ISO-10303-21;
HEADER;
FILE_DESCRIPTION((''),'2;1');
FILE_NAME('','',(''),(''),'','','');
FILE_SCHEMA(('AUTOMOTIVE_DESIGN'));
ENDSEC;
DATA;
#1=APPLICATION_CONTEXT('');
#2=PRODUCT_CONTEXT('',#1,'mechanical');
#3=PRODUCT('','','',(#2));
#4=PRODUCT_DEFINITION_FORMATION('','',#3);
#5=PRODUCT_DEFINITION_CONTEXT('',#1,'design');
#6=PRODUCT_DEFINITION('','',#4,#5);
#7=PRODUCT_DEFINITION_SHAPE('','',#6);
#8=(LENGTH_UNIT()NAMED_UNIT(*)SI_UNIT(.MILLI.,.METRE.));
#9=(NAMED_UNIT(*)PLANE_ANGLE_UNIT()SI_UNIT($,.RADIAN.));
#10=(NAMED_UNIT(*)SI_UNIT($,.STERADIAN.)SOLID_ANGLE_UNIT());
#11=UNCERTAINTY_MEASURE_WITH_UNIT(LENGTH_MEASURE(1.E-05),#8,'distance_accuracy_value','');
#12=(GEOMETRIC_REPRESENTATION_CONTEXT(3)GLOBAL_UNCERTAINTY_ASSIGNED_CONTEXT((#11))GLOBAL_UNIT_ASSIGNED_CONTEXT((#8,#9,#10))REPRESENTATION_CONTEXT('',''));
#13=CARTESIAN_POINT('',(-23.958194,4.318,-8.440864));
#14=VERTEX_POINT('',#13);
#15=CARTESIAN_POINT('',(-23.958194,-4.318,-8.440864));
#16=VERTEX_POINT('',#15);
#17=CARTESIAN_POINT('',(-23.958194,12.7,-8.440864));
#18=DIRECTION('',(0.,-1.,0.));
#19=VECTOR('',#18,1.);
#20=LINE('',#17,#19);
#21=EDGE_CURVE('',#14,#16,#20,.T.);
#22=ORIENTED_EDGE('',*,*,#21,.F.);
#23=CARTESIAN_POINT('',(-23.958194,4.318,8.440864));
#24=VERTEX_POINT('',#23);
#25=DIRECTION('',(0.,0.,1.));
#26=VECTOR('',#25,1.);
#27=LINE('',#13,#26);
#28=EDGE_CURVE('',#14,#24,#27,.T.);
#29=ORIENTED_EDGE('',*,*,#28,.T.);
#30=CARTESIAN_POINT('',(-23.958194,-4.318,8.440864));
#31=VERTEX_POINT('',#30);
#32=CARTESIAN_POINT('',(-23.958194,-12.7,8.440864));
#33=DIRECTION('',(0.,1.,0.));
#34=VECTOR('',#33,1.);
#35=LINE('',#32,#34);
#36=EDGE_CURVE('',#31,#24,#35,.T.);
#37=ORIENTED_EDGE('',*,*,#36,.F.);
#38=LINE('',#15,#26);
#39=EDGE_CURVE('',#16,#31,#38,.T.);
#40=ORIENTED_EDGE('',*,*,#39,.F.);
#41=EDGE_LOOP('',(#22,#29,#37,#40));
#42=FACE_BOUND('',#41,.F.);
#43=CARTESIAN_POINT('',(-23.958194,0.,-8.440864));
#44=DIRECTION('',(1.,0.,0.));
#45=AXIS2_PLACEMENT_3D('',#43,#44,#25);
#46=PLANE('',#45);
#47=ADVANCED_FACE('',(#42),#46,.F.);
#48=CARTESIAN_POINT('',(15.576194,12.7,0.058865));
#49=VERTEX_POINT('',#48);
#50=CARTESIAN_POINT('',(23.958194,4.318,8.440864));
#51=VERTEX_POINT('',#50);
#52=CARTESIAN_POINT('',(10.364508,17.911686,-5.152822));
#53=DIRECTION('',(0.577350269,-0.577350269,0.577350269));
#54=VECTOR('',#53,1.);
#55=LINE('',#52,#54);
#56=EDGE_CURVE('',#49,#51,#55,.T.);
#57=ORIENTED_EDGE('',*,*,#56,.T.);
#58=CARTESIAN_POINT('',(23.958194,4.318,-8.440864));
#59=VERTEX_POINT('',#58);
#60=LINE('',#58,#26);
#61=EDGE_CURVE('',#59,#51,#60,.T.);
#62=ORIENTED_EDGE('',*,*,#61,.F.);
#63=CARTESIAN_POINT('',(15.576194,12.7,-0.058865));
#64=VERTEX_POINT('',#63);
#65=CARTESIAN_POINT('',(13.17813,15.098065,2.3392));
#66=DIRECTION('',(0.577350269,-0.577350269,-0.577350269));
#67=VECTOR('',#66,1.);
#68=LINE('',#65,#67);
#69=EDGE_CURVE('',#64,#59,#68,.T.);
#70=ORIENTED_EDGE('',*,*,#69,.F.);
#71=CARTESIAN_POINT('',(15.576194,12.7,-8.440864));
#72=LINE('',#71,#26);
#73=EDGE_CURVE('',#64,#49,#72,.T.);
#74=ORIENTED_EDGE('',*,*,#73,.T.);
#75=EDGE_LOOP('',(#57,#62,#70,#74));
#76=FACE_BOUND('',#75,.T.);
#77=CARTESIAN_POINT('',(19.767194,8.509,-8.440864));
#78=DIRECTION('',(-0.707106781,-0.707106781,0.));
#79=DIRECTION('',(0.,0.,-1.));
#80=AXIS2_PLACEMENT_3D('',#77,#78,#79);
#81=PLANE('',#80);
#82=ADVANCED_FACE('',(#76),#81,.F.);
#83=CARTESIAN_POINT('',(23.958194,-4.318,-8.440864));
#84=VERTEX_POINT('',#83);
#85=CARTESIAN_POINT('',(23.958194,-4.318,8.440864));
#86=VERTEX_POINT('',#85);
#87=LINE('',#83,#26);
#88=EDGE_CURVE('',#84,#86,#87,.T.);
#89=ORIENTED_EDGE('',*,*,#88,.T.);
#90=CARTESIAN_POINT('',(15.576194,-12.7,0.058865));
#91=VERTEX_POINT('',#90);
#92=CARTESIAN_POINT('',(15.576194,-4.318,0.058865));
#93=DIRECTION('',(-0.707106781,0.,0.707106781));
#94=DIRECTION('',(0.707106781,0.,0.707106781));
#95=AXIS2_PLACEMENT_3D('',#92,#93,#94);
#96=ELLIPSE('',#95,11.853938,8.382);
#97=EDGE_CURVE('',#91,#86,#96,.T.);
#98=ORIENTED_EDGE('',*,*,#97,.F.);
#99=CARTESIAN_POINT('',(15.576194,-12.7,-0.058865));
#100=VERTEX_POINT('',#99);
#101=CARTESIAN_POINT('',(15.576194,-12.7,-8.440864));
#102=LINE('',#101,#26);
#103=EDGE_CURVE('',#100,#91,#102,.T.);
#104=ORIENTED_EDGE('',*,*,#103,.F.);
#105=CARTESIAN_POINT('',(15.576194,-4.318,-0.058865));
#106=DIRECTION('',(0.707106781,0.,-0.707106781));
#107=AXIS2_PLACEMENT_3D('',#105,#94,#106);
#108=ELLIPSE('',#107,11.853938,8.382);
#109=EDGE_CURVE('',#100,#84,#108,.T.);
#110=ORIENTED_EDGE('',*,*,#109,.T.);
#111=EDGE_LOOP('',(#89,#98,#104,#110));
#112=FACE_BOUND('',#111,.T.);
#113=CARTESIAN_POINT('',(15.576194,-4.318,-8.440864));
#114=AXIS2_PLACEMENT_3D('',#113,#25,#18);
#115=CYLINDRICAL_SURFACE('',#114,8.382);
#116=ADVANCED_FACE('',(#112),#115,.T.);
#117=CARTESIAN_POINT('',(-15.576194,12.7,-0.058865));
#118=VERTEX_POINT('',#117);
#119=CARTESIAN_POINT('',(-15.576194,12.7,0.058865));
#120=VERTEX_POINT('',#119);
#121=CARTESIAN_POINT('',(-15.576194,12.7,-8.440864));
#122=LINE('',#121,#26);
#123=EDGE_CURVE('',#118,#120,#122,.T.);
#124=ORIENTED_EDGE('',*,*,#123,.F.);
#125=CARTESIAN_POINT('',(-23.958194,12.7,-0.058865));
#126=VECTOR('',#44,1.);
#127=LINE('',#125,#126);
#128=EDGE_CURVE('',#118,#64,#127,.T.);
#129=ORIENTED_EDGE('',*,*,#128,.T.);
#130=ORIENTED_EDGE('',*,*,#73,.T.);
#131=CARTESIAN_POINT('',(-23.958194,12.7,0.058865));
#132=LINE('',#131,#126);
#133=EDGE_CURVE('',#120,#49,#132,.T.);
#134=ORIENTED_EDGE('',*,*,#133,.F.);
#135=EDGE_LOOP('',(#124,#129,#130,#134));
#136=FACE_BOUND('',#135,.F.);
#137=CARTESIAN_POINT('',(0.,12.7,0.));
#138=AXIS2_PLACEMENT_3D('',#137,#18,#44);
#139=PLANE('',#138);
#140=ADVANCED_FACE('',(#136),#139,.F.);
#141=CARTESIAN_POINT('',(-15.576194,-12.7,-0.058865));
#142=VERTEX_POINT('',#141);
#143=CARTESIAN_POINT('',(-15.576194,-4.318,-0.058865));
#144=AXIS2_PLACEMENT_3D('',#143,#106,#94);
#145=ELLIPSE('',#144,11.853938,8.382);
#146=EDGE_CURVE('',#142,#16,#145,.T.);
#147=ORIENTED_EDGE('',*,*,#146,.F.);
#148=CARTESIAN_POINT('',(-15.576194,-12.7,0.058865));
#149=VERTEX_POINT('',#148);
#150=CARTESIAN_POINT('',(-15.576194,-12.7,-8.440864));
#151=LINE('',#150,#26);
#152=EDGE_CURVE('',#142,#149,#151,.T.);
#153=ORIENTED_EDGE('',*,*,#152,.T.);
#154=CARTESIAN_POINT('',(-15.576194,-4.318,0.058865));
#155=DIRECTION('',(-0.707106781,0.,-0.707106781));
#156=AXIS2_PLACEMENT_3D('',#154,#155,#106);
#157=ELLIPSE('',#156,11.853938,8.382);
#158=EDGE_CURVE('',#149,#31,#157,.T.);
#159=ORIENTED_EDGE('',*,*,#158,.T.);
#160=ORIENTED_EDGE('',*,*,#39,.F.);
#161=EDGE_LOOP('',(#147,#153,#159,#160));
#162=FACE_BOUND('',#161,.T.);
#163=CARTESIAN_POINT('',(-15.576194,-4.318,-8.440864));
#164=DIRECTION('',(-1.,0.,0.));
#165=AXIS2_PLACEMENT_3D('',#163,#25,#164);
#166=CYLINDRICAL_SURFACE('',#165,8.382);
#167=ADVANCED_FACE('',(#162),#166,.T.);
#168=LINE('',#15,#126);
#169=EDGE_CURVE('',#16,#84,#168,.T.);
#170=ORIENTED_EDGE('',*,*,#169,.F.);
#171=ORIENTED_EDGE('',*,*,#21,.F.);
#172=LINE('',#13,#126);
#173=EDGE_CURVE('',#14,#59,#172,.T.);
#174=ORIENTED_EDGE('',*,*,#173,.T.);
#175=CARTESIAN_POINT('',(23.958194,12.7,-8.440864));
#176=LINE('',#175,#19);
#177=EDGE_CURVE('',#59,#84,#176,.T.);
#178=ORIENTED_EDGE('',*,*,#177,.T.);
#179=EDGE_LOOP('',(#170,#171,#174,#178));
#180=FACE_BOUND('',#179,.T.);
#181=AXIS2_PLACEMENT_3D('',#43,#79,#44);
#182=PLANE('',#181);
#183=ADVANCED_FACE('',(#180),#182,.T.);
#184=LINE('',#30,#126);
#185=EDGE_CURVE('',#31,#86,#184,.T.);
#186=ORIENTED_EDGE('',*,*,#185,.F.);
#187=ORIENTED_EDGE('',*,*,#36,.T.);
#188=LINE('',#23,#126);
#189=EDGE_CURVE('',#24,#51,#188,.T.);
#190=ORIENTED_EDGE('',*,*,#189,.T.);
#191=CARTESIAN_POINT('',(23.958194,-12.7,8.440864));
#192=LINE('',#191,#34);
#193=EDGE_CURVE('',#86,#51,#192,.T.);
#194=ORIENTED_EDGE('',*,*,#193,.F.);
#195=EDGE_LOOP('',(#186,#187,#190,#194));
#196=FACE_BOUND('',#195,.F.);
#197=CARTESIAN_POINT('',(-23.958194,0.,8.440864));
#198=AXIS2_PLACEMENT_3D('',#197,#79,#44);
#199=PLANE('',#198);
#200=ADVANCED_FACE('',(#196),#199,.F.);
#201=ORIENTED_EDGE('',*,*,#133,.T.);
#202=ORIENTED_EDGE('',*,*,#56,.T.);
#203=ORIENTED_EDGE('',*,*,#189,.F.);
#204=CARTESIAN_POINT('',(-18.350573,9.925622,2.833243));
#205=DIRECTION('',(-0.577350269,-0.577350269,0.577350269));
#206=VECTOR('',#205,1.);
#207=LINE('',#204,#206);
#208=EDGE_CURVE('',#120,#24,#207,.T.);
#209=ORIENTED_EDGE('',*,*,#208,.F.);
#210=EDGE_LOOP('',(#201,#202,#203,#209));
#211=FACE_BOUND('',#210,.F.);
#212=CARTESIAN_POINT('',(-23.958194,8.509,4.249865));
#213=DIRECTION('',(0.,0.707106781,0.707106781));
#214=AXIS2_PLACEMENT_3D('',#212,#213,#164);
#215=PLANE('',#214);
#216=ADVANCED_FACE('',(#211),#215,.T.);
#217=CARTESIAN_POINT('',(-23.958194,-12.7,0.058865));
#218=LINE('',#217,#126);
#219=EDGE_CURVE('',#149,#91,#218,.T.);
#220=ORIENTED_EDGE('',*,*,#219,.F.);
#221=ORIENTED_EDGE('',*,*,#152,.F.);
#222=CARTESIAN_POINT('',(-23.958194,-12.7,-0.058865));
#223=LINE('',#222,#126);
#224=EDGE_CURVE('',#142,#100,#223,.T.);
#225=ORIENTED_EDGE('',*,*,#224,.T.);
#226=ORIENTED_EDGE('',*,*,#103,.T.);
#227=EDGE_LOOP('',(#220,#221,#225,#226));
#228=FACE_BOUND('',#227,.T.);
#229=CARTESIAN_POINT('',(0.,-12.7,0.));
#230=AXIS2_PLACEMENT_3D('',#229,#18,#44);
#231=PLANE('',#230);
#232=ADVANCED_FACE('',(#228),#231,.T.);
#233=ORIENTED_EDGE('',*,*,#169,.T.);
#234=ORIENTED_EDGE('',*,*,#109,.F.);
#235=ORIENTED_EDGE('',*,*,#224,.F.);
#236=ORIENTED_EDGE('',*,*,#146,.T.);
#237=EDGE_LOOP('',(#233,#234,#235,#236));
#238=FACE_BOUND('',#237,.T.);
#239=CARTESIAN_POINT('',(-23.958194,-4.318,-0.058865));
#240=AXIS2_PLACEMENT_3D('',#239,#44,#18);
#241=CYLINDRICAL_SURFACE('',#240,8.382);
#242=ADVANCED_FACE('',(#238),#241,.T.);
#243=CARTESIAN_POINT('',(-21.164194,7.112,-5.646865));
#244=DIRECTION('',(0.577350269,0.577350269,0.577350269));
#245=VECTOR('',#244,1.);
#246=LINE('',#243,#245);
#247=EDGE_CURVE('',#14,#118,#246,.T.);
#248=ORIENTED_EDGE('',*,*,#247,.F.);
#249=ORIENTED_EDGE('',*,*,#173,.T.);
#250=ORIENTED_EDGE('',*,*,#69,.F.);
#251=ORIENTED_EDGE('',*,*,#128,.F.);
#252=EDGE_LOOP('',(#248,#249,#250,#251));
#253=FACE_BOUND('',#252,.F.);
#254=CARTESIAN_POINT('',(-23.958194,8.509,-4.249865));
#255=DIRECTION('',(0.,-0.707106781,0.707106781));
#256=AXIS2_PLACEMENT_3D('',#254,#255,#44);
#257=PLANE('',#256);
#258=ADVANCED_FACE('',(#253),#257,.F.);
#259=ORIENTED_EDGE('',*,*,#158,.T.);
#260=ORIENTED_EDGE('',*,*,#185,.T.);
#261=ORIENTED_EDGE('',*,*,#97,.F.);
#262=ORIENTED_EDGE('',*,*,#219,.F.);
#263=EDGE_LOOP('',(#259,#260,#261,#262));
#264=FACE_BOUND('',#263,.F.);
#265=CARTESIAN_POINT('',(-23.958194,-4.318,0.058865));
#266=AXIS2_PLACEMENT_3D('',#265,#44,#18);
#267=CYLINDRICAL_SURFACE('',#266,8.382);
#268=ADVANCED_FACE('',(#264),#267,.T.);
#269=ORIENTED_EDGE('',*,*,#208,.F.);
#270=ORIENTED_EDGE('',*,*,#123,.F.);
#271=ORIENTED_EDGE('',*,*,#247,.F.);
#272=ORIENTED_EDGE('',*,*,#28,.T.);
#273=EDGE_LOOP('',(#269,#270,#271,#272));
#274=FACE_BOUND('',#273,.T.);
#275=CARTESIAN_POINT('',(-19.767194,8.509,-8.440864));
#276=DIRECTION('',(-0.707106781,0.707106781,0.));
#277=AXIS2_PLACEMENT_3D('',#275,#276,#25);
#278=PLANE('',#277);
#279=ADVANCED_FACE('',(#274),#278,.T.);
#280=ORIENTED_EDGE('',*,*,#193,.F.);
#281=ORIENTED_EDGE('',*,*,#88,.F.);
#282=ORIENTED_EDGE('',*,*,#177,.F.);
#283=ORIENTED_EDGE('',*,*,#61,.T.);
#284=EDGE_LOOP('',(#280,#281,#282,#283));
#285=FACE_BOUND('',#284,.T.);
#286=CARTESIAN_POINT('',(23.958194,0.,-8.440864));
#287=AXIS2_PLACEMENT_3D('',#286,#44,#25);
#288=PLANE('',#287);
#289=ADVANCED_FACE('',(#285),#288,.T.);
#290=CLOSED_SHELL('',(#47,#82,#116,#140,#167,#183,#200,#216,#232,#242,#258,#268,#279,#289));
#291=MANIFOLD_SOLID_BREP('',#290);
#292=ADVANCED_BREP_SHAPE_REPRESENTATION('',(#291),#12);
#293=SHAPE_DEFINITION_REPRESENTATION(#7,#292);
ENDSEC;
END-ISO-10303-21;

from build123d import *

# Parameters (mm, degrees)
F0_W     = 47.9163888
F0_H     = 16.881729
F1_DEPTH = 12.7
F2_R     = 8.382
F3_SIZE  = 8.382


# Not quite as in the source:
# - a feature names something its author has since deleted; it is built from what else it names


with BuildPart() as f1:
    # F0 (on Front) → F1 (new body, symmetric)
    with BuildSketch(Plane.XZ):
        Rectangle(F0_W, F0_H)
    extrude(amount=F1_DEPTH, both=True)

    # F2
    f2_edges = [f1.edges().sort_by_distance(p)[0] for p in [
        (0, -12.7, 8.440864),
        (0, -12.7, -8.440865),
        (-23.958194, -12.7, 0),
        (23.958194, -12.7, 0),
    ]]
    fillet(f2_edges, radius=F2_R)

    # F3
    f3_edges = [f1.edges().sort_by_distance(p)[0] for p in [
        (0, 12.7, 8.440864),
        (23.958194, 12.7, 0),
        (0, 12.7, -8.440865),
        (-23.958194, 12.7, 0),
    ]]
    chamfer(f3_edges, length=F3_SIZE)


solid = f1.part
